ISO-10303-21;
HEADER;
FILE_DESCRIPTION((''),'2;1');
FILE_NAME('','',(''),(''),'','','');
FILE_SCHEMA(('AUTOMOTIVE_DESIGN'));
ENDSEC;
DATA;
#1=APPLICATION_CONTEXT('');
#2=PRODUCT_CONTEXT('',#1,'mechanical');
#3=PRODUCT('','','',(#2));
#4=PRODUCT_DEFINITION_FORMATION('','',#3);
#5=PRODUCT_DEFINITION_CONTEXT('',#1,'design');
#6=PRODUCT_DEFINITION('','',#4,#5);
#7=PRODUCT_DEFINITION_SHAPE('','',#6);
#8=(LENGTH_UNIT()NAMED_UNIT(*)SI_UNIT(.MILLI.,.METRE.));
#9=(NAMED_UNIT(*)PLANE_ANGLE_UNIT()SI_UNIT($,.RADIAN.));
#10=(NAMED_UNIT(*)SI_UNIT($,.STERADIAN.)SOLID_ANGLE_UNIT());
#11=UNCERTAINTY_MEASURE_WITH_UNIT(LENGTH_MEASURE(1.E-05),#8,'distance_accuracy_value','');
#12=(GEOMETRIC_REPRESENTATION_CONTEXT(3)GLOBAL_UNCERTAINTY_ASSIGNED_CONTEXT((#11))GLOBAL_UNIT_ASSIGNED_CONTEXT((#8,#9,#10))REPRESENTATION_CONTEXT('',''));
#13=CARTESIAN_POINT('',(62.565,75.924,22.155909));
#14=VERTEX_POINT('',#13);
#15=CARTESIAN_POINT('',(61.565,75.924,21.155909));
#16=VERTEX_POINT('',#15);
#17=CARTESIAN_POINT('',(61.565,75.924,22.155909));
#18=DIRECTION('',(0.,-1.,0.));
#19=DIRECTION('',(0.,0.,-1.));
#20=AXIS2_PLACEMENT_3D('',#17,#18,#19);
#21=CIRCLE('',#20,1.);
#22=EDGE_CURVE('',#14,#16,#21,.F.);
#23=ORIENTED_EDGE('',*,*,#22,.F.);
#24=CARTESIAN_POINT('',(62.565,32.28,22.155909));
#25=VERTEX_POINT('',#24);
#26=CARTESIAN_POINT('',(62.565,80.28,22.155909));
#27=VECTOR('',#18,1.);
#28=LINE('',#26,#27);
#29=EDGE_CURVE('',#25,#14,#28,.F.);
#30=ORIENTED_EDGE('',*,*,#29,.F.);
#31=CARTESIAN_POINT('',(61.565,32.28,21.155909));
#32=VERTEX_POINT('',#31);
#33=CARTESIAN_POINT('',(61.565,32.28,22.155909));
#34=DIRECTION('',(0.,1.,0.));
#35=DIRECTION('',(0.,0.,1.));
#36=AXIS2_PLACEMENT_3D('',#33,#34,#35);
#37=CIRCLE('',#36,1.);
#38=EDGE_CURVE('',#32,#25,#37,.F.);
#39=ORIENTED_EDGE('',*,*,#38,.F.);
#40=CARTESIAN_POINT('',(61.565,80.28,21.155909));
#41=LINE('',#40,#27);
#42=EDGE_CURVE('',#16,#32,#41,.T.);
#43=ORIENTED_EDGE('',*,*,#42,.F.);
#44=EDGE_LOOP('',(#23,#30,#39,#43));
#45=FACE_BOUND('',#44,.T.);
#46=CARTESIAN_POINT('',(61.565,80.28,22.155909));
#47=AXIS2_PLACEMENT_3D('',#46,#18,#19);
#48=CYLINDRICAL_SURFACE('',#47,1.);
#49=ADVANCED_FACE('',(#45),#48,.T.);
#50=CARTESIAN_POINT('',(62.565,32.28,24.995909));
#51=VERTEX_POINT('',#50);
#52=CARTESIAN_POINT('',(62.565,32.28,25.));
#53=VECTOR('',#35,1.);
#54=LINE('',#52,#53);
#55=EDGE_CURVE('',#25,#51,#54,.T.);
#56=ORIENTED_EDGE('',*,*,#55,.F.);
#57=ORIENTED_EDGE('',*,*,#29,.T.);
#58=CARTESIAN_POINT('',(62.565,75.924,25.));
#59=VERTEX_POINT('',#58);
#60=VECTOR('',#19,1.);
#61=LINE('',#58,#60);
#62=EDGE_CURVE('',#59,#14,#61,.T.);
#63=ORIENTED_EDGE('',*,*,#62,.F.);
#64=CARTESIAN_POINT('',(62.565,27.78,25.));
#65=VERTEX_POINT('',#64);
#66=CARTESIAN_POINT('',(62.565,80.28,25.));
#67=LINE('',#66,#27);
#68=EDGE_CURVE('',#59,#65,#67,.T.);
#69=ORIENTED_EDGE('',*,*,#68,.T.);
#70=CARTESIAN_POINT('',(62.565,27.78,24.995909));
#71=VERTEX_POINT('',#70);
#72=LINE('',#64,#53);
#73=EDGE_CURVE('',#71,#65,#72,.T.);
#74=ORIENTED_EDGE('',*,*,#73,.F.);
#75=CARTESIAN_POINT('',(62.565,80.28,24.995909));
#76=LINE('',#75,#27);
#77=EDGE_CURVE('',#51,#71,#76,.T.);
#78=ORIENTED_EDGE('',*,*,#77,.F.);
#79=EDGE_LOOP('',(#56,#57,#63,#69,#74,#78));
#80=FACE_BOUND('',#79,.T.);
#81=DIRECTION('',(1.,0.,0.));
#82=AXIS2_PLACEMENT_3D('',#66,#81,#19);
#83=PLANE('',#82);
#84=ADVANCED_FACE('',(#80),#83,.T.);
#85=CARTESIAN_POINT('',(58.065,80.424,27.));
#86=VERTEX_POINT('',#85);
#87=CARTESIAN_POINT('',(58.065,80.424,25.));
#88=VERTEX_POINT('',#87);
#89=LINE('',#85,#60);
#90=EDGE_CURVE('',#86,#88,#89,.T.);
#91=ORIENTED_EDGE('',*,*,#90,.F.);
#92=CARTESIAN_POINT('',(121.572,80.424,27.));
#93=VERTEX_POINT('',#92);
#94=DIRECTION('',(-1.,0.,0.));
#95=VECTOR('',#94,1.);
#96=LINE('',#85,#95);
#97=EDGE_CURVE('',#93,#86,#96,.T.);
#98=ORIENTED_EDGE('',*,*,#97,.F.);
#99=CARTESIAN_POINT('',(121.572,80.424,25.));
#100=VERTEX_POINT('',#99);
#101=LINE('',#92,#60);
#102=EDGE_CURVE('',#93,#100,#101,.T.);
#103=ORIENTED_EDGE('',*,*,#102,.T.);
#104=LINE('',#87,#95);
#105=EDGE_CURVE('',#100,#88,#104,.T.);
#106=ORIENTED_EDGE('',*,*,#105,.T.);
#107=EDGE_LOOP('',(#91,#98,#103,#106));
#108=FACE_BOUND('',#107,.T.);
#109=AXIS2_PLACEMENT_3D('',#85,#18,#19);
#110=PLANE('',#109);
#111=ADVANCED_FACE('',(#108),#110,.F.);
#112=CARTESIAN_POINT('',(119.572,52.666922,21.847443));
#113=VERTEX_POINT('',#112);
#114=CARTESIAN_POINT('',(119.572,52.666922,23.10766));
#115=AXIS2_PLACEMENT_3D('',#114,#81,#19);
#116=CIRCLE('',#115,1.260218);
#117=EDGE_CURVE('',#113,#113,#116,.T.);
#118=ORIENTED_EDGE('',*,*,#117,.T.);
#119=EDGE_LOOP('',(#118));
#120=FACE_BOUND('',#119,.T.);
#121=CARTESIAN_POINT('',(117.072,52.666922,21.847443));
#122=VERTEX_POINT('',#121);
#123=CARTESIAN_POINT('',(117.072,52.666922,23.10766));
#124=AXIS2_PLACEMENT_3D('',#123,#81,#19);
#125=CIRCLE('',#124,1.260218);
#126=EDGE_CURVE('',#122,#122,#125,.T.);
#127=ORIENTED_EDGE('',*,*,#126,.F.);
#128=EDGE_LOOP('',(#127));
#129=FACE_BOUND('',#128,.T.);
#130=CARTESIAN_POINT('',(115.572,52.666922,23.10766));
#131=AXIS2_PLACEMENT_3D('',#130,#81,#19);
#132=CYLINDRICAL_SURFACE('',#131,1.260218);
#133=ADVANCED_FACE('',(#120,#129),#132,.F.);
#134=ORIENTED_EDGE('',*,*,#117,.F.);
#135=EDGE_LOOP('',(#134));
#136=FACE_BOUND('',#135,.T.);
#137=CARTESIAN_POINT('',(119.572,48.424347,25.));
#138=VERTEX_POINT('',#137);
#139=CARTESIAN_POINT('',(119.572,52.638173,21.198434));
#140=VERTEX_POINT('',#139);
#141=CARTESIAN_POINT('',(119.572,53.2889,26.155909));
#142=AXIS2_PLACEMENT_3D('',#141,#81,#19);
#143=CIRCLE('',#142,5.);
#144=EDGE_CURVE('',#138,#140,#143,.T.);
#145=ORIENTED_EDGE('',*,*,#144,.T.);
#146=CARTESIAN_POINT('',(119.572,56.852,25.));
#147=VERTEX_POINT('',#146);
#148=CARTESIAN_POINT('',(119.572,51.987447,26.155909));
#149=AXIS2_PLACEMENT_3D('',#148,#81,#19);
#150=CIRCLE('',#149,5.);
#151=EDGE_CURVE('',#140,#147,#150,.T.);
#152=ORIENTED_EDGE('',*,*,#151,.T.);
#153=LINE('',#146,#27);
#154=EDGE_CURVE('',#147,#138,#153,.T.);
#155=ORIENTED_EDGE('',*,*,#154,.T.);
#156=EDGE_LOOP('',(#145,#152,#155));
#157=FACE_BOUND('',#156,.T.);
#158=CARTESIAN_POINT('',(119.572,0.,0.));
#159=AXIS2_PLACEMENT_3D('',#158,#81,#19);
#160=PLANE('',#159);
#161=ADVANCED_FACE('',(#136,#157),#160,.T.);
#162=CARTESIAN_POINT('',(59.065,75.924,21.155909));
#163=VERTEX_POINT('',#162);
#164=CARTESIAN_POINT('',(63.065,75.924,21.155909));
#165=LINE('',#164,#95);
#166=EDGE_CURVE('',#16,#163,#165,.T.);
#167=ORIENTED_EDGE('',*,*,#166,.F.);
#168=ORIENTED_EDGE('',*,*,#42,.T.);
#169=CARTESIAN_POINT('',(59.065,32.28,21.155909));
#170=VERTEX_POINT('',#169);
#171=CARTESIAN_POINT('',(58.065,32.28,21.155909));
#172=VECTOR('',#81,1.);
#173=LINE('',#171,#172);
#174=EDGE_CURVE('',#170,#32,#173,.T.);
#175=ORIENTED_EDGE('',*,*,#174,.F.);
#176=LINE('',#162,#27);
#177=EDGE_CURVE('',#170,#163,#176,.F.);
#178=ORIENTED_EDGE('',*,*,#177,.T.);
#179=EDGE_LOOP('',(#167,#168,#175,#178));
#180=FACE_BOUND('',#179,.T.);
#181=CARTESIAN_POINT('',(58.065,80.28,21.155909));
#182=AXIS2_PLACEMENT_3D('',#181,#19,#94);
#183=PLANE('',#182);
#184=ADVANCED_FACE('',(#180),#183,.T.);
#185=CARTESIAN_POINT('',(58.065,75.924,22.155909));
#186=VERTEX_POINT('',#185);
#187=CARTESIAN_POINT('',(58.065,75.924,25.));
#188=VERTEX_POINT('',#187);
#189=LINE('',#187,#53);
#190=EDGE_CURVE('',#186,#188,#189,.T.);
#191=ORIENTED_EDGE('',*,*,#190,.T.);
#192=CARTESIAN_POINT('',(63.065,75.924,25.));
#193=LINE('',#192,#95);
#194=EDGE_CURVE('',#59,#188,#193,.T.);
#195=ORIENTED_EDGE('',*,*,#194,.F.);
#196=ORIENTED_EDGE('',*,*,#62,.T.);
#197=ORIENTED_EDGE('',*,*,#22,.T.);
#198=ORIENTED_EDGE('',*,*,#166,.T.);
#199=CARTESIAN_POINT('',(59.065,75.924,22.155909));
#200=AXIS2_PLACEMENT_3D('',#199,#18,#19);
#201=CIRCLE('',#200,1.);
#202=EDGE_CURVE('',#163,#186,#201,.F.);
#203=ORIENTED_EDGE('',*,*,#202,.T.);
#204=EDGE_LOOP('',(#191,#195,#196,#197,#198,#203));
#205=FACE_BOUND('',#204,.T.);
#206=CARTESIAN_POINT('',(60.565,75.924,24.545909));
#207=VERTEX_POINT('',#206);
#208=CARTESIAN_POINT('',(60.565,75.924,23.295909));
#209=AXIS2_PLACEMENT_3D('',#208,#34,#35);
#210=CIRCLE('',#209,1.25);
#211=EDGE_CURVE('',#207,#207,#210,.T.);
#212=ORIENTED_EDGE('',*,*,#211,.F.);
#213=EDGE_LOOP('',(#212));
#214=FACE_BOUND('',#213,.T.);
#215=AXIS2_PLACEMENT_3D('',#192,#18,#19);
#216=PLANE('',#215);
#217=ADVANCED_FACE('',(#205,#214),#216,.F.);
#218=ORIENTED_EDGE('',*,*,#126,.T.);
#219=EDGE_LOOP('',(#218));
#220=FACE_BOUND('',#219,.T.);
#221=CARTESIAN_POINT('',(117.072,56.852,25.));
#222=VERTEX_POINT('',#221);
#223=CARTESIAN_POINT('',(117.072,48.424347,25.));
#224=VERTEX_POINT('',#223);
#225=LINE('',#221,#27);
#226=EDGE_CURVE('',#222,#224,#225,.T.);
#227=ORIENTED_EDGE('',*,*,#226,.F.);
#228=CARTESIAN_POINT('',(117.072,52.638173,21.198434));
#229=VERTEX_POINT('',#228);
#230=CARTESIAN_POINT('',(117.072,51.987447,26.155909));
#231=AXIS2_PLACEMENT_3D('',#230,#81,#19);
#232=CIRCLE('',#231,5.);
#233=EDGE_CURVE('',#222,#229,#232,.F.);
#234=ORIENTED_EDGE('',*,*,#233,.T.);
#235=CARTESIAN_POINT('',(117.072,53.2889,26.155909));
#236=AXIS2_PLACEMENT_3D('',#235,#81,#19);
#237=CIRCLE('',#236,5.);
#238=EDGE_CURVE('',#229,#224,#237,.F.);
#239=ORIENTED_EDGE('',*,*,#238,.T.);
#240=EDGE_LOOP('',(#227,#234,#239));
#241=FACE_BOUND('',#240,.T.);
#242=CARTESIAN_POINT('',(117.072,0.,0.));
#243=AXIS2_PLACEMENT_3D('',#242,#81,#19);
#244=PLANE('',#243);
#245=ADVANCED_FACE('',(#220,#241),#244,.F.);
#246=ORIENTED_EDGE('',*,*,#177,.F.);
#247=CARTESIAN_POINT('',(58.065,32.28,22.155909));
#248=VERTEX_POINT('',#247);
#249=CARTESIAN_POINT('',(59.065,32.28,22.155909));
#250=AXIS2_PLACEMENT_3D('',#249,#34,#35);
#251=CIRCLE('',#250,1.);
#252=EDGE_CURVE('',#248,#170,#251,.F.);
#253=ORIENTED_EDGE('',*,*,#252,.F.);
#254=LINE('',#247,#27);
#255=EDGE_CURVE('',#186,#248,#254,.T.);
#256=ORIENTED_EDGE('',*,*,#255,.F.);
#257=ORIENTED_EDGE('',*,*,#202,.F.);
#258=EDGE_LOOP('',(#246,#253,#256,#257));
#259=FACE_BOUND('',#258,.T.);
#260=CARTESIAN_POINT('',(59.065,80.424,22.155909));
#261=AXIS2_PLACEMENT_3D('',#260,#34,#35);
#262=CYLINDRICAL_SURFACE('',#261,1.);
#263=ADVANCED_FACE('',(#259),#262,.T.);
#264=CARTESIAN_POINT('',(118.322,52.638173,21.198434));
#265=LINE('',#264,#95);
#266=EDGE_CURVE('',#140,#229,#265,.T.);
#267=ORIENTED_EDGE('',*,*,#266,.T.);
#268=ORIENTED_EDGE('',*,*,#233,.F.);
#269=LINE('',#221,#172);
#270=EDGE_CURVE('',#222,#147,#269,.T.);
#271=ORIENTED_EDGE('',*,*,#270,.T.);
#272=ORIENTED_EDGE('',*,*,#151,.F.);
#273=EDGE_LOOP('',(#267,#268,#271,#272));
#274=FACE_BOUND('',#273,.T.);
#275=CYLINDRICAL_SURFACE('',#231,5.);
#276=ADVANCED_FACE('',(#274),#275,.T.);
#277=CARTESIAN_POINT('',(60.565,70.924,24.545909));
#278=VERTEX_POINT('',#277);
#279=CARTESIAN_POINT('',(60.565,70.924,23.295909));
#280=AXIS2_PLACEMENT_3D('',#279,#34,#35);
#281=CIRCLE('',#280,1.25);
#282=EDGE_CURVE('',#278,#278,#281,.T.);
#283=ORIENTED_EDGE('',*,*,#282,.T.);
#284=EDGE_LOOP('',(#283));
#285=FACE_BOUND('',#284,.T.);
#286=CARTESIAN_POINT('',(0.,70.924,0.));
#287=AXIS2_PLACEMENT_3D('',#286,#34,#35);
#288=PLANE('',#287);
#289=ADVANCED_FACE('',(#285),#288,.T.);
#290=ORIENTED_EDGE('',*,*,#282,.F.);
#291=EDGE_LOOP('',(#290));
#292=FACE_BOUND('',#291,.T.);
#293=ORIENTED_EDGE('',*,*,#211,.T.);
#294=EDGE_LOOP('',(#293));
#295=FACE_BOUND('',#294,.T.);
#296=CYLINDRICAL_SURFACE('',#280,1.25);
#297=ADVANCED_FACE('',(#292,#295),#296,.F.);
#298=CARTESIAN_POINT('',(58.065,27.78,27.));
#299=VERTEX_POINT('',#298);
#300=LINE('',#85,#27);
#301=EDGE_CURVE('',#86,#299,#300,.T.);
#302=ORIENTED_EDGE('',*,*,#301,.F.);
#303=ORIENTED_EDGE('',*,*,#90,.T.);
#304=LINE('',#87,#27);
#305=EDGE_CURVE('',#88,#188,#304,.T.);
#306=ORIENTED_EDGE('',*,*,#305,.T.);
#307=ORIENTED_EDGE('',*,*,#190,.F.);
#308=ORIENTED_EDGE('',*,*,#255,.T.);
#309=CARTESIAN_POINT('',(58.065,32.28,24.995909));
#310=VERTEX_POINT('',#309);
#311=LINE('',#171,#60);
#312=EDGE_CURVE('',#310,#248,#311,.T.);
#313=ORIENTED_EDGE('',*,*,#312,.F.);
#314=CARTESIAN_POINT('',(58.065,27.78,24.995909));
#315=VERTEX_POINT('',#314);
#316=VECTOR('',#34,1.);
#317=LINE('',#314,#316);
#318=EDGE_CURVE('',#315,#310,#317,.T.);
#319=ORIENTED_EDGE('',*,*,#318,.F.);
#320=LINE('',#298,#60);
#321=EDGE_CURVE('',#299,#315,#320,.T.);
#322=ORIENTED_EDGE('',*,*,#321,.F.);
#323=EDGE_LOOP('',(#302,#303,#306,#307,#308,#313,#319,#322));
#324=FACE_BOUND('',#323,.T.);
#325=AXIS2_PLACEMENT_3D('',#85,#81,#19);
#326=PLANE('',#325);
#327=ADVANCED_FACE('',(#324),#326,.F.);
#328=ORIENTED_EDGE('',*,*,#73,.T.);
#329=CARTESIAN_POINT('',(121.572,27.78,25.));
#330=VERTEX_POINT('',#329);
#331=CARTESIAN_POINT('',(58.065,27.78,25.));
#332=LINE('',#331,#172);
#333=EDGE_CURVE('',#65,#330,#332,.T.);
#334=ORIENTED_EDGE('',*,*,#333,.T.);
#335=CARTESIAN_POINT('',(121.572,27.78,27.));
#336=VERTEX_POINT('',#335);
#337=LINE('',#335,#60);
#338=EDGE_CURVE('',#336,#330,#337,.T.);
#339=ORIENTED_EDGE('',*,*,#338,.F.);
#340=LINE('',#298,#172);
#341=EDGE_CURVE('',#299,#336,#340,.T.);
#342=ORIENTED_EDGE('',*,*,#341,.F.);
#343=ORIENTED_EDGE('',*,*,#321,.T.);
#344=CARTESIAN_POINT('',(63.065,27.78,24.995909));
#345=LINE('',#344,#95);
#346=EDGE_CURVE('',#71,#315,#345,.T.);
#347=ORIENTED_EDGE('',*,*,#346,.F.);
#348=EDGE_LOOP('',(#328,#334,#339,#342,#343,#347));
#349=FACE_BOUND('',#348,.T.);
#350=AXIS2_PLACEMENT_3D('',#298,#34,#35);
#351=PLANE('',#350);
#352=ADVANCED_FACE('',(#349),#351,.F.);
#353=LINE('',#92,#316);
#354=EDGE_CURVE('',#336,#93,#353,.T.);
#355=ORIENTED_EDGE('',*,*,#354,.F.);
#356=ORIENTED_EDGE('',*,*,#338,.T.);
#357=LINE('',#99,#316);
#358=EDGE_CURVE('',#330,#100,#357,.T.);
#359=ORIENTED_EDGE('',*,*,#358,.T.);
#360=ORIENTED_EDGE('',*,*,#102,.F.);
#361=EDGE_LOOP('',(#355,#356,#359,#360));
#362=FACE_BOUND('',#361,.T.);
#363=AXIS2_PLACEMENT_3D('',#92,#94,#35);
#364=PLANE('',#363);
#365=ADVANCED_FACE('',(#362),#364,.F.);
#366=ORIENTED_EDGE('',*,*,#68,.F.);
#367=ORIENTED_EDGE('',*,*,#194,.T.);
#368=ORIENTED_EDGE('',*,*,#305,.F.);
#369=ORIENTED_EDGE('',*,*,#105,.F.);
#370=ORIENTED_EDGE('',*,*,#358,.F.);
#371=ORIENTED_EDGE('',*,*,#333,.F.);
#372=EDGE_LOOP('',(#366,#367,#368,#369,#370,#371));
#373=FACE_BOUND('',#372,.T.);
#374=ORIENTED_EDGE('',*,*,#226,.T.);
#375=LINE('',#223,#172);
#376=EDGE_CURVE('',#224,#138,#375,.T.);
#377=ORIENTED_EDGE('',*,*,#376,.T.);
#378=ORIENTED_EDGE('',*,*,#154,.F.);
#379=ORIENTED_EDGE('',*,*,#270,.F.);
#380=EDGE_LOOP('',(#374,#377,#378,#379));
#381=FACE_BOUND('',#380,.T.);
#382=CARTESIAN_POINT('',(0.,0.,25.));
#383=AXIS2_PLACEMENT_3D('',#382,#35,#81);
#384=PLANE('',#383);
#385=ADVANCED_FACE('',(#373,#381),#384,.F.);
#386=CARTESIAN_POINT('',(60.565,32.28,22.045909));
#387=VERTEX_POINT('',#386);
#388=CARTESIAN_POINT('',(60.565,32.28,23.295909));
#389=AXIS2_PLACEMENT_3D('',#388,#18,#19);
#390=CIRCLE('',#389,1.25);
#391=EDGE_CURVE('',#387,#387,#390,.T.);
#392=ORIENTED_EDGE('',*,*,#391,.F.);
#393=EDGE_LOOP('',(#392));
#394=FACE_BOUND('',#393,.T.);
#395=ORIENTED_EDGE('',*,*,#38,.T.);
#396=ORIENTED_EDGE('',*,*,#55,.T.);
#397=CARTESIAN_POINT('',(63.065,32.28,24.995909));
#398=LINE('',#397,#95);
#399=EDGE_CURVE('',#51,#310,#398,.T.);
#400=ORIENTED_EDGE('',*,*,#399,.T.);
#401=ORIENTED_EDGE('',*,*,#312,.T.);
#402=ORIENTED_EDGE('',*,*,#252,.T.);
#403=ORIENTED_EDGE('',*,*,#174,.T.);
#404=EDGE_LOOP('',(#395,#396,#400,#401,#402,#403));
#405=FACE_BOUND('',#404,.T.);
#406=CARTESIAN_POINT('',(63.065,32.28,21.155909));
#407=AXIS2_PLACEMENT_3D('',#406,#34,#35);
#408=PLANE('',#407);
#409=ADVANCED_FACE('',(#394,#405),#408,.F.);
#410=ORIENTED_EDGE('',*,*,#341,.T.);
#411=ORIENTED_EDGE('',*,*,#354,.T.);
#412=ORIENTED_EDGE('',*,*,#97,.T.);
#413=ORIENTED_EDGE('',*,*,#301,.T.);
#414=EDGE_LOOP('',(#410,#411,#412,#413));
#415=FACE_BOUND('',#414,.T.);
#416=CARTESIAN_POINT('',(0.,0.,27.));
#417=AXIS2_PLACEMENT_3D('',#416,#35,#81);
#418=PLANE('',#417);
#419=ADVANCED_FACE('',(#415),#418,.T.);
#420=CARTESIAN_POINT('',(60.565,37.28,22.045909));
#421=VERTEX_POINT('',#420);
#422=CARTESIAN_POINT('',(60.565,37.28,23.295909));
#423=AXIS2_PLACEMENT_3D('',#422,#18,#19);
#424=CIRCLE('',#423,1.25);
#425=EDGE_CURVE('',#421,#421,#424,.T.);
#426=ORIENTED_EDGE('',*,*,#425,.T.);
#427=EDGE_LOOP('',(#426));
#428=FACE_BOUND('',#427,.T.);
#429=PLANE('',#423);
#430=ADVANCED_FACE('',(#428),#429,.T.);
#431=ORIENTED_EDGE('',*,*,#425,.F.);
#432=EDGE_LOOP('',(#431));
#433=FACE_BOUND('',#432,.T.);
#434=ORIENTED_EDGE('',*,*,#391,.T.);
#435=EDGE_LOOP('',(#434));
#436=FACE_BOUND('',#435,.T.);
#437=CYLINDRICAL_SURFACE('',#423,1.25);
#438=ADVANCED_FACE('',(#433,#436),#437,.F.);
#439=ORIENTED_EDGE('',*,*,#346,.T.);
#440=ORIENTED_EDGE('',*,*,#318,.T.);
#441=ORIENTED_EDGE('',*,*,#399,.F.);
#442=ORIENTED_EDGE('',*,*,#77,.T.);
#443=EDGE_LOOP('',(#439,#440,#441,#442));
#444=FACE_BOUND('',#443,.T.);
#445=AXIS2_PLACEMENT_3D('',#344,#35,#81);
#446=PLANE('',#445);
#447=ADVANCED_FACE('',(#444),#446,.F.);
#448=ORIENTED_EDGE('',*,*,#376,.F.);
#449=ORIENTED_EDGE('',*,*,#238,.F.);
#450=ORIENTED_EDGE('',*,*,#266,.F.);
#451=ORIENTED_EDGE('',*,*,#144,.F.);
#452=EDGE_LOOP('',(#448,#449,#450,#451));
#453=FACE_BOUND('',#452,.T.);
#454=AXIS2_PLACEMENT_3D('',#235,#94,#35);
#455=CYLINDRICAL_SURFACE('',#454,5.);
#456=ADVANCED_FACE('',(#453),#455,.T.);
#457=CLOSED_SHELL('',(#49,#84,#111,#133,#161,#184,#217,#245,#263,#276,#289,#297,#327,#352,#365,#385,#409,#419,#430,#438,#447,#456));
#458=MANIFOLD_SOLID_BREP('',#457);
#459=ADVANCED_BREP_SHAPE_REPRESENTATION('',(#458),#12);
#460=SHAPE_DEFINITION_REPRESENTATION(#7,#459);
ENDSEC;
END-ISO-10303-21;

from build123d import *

# Parameters (mm, degrees)
BOSS_EXTRUDE1_START = 5
SKETCH2_W           = 63.507
SKETCH2_H           = 52.644
BOSS_EXTRUDE1_DEPTH = 2
SKETCH5_W           = 4.5
SKETCH5_H           = 3.844091241
BOSS_EXTRUDE2_DEPTH = 52.5
SKETCH8_W           = 3.84
SKETCH8_H           = 4.5
CUT_EXTRUDE1_DEPTH  = 5
SKETCH9_W           = 3.844091241
SKETCH9_H           = 4.5
CUT_EXTRUDE2_DEPTH  = 5
FILLET1_R           = 1
BOSS_EXTRUDE3_START = -2
SKETCH10_W          = 3.844091241
SKETCH10_H          = 8.427653373
BOSS_EXTRUDE3_DEPTH = 2.5
FILLET2_R           = 5
SKETCH11_R          = 1.25
CUT_EXTRUDE3_DEPTH  = 5
CUT_EXTRUDE4_START  = -5
SKETCH12_R          = 1.25
CUT_EXTRUDE4_DEPTH  = 5
SKETCH16_R          = 1.26021762
CUT_EXTRUDE5_DEPTH  = 4


with BuildPart() as part:
    # Sketch2 → Boss-Extrude1 (new body)
    with BuildSketch(Plane.XY.offset(20).offset(BOSS_EXTRUDE1_START)):
        with Locations((89.8185, 54.102)):
            Rectangle(SKETCH2_W, SKETCH2_H)
    extrude(amount=BOSS_EXTRUDE1_DEPTH)

    # Sketch5 → Boss-Extrude2 (add)
    with BuildSketch(Plane.XZ.offset(-27.78)):
        with Locations((60.315, 23.077954379)):
            Rectangle(SKETCH5_W, SKETCH5_H)
    extrude(amount=-BOSS_EXTRUDE2_DEPTH)

    # Sketch8 → Cut-Extrude1 (cut)
    with BuildSketch(Plane.ZY.offset(-58.065)):
        with Locations((23.075908759, 30.03)):
            Rectangle(SKETCH8_W, SKETCH8_H)
    extrude(amount=-CUT_EXTRUDE1_DEPTH, mode=Mode.SUBTRACT)

    # Sketch9 → Cut-Extrude2 (cut)
    with BuildSketch(Plane.ZY.offset(-58.065)):
        with Locations((23.077954379, 78.174)):
            Rectangle(SKETCH9_W, SKETCH9_H)
    extrude(amount=-CUT_EXTRUDE2_DEPTH, mode=Mode.SUBTRACT)

    # Fillet1
    fillet1_edges = [part.edges().sort_by_distance(p)[0] for p in [
        (58.065, 54.102, 21.155908759),
        (62.565, 54.102, 21.155908759),
    ]]
    fillet(fillet1_edges, radius=FILLET1_R)

    # Sketch10 → Boss-Extrude3 (add)
    with BuildSketch(Plane(origin=(121.572, 0, 0), x_dir=(0, 0, -1), z_dir=(1, 0, 0)).offset(BOSS_EXTRUDE3_START)):
        with Locations((-23.077954379, 52.638173314)):
            Rectangle(SKETCH10_W, SKETCH10_H)
    extrude(amount=-BOSS_EXTRUDE3_DEPTH)

    # Fillet2
    # the kernel refuses this fillet: 5 mm, written as the material it takes off along each edge
    with BuildSketch(Plane(origin=(131.733382256, 56.852, 21.155908759), x_dir=(0, 0, 1), z_dir=(-1, 0, 0))) as fillet2_piece_1:
        with BuildLine():
            CenterArc((5, -4.864552903), FILLET2_R, 103.366656392, 76.633343608)
            Line((0, -4.864552903), (-0.1, -4.864552903))
            Line((-0.1, -4.864552903), (-0.1, 0))
            Line((-0.1, 0), (0, 0.1))
            ThreePointArc((0, 0.1), (1.922045621, 0.1), (3.820973066, 0.097291058))
            Line((3.820973066, 0.097291058), (3.844091241, 0))
        make_face()
    extrude(amount=26.822764513, mode=Mode.SUBTRACT)
    with BuildSketch(Plane(origin=(131.733382256, 48.424346627, 21.155908759), x_dir=(0, 0, 1), z_dir=(-1, 0, 0))) as fillet2_piece_2:
        with BuildLine():
            CenterArc((5, 4.864552903), FILLET2_R, 180, 76.633343608)
            Line((0, 4.864552903), (-0.1, 4.864552903))
            Line((-0.1, 4.864552903), (-0.1, 0))
            Line((-0.1, 0), (0, -0.1))
            ThreePointArc((0, -0.1), (1.922045621, -0.1), (3.820973066, -0.097291058))
            Line((3.820973066, -0.097291058), (3.844091241, 0))
        make_face()
    extrude(amount=26.822764513, mode=Mode.SUBTRACT)

    # Sketch11 → Cut-Extrude3 (cut)
    with BuildSketch(Plane(origin=(0, 32.28, 0), x_dir=(-1, 0, 0), z_dir=(0, -1, 0))):
        with Locations(Location((-60.565, -23.295908759, 0), (0, 0, 90))):
            Circle(SKETCH11_R)
    extrude(amount=-CUT_EXTRUDE3_DEPTH, mode=Mode.SUBTRACT)

    # Sketch12 → Cut-Extrude4 (cut)
    with BuildSketch(Plane(origin=(0, 75.924, 0), x_dir=(1, 0, 0), z_dir=(0, 1, 0)).offset(CUT_EXTRUDE4_START)):
        with Locations(Location((60.565, -23.295908759, 0), (0, 0, 90))):
            Circle(SKETCH12_R)
    extrude(amount=CUT_EXTRUDE4_DEPTH, mode=Mode.SUBTRACT)

    # Sketch16 → Cut-Extrude5 (cut)
    with BuildSketch(Plane(origin=(119.572, 0, 0), x_dir=(0, 0, -1), z_dir=(1, 0, 0))):
        with Locations((-23.10766013, 52.666921641)):
            Circle(SKETCH16_R)
    extrude(amount=-CUT_EXTRUDE5_DEPTH, mode=Mode.SUBTRACT)


solid = part.part
